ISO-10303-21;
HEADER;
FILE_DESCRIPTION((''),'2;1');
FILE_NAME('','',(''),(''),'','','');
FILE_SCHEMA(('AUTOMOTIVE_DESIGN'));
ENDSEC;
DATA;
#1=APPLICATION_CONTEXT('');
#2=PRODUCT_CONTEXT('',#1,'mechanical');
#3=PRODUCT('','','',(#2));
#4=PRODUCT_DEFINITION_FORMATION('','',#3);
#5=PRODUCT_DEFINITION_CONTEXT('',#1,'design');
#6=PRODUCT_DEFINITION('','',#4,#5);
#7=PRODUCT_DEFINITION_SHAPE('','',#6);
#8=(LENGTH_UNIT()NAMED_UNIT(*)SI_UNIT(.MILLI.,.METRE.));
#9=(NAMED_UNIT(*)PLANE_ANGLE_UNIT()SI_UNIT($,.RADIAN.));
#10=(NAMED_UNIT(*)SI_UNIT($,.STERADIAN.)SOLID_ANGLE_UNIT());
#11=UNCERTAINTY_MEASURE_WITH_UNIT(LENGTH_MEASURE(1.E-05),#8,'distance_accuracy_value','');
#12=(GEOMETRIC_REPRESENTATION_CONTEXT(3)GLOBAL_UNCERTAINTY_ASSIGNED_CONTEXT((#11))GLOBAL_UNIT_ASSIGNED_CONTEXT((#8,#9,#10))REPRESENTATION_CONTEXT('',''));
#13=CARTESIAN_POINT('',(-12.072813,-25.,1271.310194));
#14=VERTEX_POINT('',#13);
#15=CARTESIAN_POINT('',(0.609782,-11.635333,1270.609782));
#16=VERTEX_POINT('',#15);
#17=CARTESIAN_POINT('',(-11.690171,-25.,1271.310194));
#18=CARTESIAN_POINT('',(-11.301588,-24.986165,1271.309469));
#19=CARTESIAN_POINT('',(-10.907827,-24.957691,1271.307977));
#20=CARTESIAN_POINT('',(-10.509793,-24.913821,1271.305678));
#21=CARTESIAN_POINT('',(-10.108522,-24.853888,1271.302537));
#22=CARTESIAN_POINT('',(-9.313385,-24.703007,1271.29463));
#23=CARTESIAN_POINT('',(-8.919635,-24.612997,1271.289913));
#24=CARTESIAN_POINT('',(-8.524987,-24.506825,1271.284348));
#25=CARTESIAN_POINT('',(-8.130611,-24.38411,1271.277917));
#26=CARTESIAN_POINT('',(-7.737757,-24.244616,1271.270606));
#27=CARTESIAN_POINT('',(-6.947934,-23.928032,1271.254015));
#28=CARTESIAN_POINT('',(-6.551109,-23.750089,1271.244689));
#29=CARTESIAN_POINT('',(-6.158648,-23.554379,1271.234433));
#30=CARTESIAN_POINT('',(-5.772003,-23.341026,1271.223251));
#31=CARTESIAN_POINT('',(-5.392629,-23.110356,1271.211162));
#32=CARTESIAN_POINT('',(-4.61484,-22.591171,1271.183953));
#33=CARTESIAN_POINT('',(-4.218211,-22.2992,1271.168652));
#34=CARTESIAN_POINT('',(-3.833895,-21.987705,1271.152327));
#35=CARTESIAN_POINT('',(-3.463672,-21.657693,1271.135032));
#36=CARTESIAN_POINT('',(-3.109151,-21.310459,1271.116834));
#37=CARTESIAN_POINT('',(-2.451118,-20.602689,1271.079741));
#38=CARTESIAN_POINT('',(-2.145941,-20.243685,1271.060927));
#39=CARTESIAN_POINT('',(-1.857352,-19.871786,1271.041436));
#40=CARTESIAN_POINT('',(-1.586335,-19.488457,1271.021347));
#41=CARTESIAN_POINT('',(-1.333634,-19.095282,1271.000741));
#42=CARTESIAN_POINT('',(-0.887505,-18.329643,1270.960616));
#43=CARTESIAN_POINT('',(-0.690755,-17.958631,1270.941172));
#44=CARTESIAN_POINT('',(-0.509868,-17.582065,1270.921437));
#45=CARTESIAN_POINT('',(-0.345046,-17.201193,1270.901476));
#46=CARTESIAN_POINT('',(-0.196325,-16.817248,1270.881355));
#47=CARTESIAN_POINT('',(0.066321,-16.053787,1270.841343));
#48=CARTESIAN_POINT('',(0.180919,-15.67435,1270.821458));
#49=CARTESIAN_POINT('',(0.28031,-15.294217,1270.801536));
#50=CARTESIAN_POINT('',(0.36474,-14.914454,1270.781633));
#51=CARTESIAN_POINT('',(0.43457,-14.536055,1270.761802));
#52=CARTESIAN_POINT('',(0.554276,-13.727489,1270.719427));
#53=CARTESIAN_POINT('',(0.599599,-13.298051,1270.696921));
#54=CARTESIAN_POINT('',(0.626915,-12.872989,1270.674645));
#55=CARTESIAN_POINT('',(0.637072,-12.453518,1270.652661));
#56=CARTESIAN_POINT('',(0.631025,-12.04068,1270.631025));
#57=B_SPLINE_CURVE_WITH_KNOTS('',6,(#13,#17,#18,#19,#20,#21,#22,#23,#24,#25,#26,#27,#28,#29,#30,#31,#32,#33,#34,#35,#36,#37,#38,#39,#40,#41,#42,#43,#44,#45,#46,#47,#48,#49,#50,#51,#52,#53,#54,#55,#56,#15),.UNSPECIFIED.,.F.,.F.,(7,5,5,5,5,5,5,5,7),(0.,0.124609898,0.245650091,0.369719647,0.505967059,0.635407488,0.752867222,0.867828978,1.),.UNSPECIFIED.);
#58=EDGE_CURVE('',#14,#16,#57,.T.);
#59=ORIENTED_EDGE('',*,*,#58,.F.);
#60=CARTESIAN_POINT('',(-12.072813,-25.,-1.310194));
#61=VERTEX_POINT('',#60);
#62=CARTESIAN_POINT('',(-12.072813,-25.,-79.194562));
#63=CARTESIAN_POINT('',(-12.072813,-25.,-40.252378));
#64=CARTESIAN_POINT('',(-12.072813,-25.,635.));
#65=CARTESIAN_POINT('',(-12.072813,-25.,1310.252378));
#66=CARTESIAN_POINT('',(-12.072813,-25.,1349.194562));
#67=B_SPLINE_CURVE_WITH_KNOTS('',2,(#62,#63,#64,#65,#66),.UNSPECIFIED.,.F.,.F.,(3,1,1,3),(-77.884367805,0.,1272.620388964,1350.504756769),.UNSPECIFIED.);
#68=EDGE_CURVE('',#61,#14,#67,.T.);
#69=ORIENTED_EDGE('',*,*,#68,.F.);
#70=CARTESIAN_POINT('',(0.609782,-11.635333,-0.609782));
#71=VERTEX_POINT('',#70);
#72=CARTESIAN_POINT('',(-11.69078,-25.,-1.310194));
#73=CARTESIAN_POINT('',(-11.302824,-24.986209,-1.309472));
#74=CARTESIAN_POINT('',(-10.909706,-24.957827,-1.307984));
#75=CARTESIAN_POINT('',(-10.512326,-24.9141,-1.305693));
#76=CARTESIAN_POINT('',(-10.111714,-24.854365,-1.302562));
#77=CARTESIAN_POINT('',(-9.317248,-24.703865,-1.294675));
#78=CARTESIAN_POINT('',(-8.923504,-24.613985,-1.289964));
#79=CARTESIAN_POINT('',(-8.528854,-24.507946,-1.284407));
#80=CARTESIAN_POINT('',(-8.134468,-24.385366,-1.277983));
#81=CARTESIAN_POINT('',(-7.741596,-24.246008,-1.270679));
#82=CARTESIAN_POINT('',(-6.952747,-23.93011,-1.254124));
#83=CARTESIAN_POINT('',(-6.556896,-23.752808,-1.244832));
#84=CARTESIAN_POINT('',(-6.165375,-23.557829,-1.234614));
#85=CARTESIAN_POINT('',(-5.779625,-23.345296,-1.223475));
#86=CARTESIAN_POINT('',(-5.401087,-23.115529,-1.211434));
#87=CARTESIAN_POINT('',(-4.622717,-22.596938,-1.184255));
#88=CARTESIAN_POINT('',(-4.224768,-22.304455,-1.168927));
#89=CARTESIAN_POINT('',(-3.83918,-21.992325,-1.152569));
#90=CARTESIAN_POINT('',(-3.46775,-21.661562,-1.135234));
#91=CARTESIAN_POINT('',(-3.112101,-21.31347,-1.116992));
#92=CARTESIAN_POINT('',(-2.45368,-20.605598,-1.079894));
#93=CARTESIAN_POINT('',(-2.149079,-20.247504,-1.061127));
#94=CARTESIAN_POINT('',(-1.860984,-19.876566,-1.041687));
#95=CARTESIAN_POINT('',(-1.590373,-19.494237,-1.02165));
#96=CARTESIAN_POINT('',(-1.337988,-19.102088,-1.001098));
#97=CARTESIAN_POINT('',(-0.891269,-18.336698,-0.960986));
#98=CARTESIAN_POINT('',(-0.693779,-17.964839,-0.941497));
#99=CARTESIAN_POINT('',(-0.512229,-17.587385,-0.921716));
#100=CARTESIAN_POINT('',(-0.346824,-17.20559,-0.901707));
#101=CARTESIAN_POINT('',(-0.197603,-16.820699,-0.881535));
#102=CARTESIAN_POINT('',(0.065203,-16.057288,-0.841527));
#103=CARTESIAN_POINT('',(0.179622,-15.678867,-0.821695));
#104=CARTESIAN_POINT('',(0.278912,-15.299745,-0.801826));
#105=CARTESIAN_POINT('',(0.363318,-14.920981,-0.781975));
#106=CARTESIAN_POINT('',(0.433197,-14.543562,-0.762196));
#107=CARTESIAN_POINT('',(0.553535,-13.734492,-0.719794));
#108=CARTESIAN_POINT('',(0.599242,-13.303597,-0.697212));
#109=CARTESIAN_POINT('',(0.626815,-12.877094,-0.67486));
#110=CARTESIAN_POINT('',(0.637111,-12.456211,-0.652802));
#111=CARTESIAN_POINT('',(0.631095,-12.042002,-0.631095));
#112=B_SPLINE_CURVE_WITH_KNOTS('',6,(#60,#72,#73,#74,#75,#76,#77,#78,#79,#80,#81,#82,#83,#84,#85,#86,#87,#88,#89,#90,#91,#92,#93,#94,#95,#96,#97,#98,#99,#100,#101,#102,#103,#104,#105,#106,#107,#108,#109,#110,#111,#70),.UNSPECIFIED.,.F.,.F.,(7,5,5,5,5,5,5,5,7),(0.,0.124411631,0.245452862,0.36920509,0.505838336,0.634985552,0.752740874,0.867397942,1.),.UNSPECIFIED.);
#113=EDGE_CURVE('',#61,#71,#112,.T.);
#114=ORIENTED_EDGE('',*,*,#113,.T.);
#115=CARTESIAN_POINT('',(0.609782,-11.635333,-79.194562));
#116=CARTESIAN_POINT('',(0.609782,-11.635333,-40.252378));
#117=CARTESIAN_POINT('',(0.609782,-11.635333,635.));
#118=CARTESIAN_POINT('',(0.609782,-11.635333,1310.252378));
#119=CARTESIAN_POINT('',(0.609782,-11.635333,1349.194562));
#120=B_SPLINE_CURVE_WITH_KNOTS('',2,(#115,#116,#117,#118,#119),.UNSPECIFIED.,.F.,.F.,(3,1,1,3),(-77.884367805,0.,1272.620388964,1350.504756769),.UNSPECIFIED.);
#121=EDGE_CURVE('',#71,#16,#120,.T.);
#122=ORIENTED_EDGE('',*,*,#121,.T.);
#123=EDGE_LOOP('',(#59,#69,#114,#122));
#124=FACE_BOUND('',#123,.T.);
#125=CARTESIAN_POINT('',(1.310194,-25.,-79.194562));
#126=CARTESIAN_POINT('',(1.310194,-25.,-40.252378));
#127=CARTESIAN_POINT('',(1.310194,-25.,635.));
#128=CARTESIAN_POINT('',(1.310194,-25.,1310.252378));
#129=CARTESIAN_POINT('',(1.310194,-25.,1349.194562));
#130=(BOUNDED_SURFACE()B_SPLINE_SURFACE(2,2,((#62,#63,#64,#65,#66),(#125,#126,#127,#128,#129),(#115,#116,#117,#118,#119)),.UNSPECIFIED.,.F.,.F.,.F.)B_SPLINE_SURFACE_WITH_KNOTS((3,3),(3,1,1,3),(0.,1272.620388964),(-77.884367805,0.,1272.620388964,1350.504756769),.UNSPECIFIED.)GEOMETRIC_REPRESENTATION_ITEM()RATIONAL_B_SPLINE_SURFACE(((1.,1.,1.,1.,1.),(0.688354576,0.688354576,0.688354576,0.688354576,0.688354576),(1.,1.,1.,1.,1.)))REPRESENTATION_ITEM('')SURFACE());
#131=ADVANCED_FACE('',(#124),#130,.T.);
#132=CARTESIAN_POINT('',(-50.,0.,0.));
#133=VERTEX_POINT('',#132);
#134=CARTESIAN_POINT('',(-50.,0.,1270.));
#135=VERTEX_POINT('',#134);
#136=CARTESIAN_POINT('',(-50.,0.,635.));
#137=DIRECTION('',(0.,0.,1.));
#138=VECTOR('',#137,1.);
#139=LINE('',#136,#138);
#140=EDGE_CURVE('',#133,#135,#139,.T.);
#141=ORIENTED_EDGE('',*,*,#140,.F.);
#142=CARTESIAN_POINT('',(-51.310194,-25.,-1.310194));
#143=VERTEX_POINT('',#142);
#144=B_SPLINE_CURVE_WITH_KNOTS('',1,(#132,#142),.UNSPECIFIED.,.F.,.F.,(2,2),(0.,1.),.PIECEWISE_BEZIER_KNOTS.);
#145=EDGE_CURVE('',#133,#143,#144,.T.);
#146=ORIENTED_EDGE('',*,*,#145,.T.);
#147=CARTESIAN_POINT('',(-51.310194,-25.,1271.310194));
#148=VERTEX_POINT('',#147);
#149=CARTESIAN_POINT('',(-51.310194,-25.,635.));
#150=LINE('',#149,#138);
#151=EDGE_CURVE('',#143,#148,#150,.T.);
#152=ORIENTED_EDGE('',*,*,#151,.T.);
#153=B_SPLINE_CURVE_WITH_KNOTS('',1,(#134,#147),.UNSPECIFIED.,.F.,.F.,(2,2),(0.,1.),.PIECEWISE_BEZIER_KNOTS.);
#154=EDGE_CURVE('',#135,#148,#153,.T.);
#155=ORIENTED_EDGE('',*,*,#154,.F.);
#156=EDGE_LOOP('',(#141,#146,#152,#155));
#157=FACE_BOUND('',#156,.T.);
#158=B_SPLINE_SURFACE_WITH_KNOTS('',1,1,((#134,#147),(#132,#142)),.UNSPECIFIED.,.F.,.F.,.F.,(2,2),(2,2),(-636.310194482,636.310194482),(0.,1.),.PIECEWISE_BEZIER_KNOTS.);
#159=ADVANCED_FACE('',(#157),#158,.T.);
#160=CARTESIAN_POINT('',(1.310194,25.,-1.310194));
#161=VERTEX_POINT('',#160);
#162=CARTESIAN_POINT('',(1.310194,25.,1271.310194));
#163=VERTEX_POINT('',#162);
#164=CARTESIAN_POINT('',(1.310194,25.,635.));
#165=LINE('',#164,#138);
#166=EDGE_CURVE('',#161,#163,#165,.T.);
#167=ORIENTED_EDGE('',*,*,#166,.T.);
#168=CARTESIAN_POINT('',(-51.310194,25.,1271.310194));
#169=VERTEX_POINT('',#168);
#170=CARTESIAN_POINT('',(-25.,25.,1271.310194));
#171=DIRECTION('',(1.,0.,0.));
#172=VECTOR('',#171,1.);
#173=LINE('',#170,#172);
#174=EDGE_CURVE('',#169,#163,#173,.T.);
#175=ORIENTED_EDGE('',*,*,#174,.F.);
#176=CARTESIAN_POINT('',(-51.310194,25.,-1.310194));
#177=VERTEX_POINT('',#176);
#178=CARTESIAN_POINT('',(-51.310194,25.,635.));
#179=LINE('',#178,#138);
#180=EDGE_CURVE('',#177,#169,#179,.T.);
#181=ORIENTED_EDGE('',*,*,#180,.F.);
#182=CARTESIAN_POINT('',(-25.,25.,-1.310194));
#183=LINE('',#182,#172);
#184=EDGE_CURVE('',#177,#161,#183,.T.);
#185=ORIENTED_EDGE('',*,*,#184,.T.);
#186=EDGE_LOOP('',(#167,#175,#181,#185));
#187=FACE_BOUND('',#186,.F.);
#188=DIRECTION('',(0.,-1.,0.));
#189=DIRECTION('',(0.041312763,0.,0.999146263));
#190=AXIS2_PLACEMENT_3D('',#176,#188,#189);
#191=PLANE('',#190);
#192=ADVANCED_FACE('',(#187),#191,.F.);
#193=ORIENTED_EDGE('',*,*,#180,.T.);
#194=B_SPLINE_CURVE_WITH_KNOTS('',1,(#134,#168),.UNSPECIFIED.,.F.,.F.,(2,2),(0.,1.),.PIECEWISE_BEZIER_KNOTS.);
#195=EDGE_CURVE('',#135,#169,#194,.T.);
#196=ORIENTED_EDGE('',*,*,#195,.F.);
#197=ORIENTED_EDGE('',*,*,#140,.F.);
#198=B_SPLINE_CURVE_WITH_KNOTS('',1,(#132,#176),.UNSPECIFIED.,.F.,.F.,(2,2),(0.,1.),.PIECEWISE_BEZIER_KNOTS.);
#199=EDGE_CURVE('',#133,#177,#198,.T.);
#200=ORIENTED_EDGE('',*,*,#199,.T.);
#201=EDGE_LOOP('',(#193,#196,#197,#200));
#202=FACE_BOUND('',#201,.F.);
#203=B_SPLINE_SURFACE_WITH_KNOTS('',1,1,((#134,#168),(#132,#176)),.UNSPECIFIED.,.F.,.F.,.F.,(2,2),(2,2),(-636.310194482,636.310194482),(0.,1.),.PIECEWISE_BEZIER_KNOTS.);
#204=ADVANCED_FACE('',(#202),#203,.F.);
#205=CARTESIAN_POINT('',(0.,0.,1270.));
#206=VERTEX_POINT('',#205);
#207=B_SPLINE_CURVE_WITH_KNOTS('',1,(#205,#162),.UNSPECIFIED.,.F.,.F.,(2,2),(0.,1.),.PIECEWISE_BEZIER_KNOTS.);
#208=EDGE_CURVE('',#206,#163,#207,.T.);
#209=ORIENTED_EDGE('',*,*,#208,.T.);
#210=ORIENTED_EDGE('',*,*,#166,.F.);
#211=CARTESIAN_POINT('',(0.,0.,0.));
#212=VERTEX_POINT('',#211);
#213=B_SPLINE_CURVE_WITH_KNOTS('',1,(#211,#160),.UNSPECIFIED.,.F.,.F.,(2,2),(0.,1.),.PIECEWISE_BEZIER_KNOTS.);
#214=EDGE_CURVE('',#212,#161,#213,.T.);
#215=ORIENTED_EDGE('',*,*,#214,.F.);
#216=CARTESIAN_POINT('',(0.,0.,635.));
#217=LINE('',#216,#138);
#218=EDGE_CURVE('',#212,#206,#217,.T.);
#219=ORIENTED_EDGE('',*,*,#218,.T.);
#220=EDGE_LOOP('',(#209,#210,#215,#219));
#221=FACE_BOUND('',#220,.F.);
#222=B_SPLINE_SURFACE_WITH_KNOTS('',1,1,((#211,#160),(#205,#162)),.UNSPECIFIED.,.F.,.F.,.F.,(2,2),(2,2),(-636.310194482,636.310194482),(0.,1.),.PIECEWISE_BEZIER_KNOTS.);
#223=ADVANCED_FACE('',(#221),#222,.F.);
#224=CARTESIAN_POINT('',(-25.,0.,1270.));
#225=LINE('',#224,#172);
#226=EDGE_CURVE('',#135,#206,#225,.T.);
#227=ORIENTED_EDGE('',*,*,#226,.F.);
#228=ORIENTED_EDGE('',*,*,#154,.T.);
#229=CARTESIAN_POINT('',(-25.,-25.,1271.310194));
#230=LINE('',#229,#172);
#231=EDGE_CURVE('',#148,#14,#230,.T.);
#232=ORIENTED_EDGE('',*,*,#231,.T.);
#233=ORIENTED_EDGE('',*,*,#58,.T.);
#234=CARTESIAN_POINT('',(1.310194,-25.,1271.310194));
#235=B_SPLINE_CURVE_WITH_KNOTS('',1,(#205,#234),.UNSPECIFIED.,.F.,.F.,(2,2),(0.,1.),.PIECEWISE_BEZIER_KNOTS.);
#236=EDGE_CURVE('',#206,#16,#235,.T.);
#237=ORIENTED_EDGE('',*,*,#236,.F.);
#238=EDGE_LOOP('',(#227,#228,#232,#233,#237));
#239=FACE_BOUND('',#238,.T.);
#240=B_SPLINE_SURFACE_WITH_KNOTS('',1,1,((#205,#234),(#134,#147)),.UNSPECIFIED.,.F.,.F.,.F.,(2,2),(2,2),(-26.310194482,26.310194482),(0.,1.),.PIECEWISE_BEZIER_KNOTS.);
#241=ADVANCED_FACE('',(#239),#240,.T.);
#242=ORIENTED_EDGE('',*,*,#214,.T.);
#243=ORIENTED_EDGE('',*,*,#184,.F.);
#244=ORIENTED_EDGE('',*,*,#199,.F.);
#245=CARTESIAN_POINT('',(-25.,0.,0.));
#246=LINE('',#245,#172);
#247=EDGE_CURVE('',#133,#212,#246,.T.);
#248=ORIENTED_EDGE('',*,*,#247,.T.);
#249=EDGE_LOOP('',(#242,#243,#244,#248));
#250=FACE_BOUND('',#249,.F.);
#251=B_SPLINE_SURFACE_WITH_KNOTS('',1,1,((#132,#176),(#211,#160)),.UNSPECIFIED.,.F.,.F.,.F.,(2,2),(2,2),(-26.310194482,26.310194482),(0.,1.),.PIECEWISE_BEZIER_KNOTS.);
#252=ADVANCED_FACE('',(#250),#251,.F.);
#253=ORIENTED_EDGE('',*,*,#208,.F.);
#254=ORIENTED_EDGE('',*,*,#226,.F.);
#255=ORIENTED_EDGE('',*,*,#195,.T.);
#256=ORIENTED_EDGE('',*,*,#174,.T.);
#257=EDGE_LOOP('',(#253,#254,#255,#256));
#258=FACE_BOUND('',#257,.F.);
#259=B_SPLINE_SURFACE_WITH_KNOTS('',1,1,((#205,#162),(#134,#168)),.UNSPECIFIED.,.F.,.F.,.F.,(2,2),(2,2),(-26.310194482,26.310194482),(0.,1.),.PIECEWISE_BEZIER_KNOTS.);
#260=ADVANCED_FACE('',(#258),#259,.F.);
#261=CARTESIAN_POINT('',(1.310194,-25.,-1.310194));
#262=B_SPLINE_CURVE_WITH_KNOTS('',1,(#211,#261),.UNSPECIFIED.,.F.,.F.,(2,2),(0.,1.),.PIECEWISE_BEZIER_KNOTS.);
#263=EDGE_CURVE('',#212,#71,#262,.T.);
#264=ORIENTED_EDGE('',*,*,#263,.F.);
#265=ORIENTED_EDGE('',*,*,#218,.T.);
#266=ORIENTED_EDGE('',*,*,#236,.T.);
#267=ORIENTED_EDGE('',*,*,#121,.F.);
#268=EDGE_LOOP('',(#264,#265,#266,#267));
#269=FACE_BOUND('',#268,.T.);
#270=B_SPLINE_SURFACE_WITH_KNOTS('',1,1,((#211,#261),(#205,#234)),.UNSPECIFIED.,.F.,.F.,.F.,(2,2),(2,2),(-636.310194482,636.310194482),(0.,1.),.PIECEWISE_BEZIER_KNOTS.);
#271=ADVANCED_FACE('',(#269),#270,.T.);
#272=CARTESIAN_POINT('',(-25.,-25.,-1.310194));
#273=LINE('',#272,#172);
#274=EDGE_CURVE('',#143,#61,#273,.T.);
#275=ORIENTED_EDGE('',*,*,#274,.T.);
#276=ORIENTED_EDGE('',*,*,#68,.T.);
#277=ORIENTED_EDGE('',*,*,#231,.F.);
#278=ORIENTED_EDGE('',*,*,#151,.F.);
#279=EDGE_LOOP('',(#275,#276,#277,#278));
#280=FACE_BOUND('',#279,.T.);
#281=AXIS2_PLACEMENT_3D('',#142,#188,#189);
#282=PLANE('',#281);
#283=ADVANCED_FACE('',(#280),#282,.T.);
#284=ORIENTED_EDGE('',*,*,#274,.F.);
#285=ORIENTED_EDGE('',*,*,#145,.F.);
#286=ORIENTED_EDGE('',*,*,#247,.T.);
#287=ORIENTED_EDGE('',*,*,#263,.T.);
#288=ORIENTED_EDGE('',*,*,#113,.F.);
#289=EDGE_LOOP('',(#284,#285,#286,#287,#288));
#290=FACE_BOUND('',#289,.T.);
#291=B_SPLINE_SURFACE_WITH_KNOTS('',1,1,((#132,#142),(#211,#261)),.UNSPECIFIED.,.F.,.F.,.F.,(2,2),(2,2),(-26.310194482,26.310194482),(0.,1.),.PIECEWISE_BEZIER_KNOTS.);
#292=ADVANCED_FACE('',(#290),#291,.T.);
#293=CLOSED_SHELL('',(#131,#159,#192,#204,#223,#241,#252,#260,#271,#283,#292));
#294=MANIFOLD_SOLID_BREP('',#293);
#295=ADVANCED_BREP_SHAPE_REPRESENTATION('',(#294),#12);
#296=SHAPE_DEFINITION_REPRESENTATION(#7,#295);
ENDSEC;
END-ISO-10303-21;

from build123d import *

# Parameters (mm, degrees)
F0_W     = 50
F0_H     = 1270
F1_DEPTH = 25
F1_TAPER = -3
F2_R     = 12.7


with BuildPart() as f1:
    # F0 (on Front) → F1 (new body, symmetric)
    with BuildSketch(Plane.XZ):
        with Locations((-25, 635)):
            Rectangle(F0_W, F0_H)
    extrude(amount=F1_DEPTH, both=True, taper=F1_TAPER)

    # F2
    f2_edges = [f1.edges().sort_by_distance(p)[0] for p in [
        (1.310194, -25, 635),
    ]]
    fillet(f2_edges, radius=F2_R)


solid = f1.part
